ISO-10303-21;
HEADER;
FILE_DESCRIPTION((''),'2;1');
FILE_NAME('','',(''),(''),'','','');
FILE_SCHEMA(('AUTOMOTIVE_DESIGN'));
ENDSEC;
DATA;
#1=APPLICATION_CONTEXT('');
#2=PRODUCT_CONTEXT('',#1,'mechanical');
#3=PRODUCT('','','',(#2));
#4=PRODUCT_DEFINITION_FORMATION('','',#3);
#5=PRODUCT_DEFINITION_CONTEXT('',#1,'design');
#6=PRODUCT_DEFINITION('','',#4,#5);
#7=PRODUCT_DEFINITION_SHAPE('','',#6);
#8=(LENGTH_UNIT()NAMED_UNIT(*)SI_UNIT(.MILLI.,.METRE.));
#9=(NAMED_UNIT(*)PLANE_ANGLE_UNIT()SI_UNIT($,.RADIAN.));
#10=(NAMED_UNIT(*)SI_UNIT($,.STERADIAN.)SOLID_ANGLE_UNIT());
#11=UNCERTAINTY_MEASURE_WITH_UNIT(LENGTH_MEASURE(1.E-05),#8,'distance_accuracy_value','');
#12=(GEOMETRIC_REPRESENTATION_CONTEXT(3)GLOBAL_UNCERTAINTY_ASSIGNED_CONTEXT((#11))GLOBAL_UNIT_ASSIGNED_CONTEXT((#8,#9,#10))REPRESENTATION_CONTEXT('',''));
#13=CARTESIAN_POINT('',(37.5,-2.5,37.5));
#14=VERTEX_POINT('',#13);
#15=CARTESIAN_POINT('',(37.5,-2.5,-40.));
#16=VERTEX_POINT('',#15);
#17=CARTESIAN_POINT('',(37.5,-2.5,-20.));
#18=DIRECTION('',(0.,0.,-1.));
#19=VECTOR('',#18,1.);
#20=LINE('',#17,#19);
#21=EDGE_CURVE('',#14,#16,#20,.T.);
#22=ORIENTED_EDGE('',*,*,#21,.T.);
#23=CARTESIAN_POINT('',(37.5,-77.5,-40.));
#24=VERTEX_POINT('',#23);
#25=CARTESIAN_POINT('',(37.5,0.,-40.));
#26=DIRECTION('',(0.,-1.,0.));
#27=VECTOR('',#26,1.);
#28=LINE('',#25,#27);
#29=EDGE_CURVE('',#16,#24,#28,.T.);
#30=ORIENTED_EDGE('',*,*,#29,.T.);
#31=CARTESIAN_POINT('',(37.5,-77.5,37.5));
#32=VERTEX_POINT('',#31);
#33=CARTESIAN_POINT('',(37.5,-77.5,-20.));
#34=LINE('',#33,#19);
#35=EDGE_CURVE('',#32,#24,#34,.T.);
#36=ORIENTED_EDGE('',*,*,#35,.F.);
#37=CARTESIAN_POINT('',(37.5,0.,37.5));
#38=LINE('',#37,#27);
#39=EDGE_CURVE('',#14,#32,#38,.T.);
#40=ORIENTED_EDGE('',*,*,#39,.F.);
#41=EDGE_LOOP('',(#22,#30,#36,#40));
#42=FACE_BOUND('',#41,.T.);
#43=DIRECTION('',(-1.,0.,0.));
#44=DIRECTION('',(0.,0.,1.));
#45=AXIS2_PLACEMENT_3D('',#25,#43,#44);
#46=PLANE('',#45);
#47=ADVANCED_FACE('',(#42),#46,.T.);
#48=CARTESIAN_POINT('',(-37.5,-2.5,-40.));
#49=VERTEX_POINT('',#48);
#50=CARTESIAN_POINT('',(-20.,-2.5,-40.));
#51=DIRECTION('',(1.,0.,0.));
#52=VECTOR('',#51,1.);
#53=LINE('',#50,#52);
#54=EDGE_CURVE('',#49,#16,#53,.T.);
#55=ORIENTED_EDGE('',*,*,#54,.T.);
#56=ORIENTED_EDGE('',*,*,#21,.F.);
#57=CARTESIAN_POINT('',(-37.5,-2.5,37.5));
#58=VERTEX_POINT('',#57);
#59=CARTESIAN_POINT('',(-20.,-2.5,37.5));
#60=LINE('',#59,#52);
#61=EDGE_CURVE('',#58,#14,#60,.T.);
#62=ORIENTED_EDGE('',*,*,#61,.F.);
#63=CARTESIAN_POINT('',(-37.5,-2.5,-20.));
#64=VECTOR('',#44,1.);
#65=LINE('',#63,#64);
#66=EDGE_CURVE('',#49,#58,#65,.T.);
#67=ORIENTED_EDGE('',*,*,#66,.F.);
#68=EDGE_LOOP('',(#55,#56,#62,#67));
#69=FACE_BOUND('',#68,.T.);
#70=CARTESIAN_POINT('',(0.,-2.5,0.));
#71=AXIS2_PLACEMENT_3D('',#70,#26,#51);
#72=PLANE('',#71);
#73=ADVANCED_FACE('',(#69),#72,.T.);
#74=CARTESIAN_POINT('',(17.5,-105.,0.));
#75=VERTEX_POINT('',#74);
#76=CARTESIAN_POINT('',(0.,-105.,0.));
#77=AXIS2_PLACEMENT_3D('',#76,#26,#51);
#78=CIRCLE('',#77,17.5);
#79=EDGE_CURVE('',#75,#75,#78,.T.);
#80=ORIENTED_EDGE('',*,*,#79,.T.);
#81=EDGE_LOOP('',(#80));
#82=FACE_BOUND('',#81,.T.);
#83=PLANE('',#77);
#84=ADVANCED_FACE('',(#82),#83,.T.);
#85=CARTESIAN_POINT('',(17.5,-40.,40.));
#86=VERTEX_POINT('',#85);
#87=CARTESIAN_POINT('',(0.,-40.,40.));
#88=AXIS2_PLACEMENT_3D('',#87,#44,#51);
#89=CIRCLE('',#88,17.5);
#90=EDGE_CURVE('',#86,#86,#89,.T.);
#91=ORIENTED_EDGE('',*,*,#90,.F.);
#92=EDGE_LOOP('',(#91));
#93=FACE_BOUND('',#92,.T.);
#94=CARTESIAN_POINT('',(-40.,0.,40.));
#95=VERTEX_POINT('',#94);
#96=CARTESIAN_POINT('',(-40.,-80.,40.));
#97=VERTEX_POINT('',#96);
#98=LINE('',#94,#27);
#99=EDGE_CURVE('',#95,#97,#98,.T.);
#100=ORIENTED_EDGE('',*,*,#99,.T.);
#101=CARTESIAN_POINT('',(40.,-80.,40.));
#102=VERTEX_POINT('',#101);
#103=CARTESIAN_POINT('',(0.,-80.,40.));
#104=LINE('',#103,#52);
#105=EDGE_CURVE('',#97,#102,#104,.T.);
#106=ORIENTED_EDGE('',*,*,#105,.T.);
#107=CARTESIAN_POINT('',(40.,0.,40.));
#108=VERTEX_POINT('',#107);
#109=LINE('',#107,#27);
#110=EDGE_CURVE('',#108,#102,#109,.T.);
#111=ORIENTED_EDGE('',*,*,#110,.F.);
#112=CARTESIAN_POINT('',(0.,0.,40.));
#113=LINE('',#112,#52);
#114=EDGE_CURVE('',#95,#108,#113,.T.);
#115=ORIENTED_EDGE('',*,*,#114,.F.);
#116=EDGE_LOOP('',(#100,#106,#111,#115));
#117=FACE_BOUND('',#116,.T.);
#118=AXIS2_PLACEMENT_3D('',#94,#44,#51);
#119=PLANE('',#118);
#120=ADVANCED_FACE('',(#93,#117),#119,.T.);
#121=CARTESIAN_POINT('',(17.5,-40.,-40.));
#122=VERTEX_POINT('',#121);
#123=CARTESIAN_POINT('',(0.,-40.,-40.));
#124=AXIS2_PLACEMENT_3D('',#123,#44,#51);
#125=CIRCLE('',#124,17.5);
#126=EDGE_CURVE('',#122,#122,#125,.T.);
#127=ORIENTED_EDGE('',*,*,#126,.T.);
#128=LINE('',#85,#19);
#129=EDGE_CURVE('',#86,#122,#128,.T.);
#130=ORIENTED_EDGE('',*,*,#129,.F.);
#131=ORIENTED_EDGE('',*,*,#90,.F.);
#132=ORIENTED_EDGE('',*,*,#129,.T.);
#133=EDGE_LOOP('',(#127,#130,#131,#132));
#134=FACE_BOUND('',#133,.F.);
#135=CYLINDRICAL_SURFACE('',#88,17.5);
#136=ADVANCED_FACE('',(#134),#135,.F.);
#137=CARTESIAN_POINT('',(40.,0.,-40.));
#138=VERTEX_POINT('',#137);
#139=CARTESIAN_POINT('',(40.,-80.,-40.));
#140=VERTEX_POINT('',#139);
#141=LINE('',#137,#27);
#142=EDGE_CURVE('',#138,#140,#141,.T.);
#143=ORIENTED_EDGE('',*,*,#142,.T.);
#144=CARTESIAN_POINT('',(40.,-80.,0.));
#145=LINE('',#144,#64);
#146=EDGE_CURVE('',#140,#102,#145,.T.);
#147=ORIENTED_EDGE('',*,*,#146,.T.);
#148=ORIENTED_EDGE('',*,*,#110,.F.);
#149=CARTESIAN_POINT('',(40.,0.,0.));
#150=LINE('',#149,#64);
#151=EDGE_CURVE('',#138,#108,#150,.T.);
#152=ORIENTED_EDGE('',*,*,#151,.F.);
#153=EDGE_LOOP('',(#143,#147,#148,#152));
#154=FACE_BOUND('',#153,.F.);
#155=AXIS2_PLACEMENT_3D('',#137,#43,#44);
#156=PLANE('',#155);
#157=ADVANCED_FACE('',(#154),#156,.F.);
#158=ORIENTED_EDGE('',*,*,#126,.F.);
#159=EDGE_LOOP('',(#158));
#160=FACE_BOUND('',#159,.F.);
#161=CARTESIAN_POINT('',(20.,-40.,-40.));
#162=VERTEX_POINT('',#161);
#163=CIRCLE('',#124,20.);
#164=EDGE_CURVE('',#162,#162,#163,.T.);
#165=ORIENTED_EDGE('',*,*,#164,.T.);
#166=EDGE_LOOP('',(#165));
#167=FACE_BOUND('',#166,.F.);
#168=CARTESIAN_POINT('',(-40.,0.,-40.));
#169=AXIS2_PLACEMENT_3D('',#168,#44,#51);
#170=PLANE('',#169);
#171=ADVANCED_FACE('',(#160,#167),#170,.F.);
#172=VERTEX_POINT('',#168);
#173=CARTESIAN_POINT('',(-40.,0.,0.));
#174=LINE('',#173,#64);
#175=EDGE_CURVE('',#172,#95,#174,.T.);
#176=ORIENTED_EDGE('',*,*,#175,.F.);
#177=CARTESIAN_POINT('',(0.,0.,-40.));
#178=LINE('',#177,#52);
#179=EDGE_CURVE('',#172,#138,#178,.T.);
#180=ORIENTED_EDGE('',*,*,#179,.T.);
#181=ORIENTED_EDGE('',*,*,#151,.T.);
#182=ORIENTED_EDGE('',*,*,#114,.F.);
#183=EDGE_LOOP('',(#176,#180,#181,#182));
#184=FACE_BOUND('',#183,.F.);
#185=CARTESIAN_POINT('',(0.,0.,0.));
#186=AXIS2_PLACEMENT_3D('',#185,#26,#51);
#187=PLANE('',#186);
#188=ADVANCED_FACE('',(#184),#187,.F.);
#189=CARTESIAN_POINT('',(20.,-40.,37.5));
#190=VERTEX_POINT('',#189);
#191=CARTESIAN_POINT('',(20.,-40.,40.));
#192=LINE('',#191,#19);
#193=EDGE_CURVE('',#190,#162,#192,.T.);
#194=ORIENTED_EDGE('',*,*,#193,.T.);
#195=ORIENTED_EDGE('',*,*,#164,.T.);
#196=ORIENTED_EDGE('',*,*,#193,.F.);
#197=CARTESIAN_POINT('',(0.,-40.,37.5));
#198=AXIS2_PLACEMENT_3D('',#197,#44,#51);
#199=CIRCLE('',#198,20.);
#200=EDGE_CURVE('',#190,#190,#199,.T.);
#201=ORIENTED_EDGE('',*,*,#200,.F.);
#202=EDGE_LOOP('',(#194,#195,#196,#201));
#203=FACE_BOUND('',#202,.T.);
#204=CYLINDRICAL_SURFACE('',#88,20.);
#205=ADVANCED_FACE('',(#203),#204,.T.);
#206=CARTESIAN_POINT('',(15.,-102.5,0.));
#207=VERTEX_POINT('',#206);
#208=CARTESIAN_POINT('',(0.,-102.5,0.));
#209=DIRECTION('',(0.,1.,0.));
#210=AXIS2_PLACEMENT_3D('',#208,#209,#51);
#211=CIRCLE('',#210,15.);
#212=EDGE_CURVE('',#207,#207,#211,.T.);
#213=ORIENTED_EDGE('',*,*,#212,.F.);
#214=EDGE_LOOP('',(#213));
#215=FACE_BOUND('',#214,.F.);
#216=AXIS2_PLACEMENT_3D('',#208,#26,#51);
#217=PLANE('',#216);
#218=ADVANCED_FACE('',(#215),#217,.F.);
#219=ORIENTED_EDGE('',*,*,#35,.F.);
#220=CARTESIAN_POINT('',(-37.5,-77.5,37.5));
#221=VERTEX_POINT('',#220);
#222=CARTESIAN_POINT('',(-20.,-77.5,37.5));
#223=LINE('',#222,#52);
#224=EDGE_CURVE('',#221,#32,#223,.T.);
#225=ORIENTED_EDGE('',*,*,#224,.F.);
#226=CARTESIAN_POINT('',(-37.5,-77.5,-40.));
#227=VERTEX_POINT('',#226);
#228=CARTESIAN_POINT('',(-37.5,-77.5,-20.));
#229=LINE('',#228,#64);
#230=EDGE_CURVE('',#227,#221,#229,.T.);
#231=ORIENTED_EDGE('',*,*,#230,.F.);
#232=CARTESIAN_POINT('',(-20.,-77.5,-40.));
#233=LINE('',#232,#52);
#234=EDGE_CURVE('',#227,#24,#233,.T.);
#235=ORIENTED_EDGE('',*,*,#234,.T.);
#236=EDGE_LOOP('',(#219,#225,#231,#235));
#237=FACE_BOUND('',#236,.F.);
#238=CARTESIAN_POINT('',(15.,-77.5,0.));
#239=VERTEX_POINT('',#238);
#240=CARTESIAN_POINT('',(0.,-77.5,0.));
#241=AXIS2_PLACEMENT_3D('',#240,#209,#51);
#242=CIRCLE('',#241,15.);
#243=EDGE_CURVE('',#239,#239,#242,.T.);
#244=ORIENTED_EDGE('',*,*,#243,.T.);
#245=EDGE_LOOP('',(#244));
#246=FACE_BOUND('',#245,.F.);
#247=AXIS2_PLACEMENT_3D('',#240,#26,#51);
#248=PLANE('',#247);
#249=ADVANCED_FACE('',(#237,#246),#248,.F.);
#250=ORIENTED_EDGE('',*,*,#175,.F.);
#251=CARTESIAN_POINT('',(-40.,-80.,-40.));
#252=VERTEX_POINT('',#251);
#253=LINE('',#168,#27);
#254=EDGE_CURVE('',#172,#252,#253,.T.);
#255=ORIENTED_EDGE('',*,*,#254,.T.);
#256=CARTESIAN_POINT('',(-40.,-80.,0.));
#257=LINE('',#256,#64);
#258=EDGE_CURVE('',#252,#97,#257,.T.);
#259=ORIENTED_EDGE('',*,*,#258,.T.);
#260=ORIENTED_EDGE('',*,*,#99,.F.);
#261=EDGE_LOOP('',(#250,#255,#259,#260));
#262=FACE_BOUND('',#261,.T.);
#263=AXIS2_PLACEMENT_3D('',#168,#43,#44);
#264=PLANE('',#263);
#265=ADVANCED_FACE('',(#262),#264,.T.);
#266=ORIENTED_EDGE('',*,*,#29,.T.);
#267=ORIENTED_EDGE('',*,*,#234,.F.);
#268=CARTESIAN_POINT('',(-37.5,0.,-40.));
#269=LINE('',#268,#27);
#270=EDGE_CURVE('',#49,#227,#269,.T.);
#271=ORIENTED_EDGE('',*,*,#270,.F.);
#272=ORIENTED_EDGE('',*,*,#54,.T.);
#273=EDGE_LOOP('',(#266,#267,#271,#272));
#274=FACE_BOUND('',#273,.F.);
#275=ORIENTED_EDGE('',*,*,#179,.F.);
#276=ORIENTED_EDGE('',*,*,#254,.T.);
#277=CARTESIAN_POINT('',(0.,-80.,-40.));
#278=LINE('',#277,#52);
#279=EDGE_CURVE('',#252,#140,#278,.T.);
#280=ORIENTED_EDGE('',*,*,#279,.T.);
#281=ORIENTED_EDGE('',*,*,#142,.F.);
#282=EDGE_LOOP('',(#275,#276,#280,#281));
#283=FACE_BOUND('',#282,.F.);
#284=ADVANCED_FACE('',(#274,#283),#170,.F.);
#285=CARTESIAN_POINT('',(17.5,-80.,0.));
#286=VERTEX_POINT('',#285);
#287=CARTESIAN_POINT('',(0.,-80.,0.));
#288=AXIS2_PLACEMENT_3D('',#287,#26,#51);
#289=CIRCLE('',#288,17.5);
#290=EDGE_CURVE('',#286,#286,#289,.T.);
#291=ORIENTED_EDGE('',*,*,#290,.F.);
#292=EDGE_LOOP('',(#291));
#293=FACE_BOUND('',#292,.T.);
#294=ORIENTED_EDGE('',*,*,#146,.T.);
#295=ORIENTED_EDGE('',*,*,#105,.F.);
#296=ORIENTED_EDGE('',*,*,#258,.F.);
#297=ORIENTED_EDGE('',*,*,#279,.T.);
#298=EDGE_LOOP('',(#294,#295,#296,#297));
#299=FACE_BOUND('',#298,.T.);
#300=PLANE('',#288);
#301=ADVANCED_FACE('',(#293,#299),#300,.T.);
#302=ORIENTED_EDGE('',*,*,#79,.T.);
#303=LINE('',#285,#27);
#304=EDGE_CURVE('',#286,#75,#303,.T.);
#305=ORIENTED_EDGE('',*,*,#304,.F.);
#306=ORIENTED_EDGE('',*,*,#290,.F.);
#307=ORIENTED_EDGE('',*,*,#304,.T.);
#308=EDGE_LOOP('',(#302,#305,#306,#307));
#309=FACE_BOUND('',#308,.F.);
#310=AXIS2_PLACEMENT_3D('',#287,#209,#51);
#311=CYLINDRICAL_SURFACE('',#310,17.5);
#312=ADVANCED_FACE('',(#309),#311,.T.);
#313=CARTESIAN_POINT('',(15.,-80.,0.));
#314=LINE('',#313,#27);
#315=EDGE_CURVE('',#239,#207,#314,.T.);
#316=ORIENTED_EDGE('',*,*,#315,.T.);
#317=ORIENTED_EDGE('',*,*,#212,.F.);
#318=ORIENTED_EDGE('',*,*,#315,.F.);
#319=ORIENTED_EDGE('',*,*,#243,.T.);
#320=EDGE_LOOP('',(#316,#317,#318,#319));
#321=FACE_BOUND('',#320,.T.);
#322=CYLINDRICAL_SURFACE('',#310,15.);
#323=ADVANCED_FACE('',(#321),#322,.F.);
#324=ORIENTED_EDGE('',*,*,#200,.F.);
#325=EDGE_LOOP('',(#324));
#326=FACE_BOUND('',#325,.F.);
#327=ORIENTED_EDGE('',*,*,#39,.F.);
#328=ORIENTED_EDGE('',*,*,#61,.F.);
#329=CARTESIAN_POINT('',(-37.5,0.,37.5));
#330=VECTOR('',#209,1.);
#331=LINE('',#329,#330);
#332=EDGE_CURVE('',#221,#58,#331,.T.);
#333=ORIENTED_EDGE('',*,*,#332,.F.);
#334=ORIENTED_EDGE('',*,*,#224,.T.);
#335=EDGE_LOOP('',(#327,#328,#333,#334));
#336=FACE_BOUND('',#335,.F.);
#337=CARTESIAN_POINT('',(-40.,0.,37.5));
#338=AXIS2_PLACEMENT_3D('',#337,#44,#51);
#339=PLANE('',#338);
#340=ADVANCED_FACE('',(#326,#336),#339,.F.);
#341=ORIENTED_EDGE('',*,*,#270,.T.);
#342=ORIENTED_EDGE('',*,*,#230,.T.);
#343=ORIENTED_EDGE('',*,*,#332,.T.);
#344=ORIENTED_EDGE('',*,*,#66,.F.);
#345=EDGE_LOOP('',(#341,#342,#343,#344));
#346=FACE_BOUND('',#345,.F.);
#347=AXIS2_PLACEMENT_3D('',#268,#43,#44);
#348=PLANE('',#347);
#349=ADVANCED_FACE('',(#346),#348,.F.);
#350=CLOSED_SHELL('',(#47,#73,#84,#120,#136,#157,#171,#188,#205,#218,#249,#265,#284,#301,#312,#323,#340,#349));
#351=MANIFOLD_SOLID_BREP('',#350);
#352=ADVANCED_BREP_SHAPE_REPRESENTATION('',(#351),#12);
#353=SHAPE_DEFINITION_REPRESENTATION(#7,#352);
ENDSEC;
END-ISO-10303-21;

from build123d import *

# Parameters (mm, degrees)
F0_W     = 80
F0_H     = 80
F1_DEPTH = 80
F2_R     = 17.5
F3_DEPTH = 25
F4_R     = 17.5
F5_DEPTH = 80.001
F6_T     = -2.5


with BuildPart() as f1:
    # F0 (on Front) → F1 (new body)
    with BuildSketch(Plane.XZ):
        Rectangle(F0_W, F0_H)
    extrude(amount=F1_DEPTH)

    # F2 (on face) → F3 (join)
    with BuildSketch(Plane.XZ.offset(80)):
        Circle(F2_R)
    extrude(amount=F3_DEPTH)

    # F4 (on face) → F5 (cut, through all)
    with BuildSketch(Plane.XY.offset(40)):
        with Locations((0, -40)):
            Circle(F4_R)
    extrude(amount=-F5_DEPTH, mode=Mode.SUBTRACT)

    # F6
    f6_openings = [f1.faces().sort_by_distance(p)[0] for p in [
        (-38.868629, -40, -40),
    ]]
    offset(amount=F6_T, openings=f6_openings, kind=Kind.INTERSECTION)


solid = f1.part
